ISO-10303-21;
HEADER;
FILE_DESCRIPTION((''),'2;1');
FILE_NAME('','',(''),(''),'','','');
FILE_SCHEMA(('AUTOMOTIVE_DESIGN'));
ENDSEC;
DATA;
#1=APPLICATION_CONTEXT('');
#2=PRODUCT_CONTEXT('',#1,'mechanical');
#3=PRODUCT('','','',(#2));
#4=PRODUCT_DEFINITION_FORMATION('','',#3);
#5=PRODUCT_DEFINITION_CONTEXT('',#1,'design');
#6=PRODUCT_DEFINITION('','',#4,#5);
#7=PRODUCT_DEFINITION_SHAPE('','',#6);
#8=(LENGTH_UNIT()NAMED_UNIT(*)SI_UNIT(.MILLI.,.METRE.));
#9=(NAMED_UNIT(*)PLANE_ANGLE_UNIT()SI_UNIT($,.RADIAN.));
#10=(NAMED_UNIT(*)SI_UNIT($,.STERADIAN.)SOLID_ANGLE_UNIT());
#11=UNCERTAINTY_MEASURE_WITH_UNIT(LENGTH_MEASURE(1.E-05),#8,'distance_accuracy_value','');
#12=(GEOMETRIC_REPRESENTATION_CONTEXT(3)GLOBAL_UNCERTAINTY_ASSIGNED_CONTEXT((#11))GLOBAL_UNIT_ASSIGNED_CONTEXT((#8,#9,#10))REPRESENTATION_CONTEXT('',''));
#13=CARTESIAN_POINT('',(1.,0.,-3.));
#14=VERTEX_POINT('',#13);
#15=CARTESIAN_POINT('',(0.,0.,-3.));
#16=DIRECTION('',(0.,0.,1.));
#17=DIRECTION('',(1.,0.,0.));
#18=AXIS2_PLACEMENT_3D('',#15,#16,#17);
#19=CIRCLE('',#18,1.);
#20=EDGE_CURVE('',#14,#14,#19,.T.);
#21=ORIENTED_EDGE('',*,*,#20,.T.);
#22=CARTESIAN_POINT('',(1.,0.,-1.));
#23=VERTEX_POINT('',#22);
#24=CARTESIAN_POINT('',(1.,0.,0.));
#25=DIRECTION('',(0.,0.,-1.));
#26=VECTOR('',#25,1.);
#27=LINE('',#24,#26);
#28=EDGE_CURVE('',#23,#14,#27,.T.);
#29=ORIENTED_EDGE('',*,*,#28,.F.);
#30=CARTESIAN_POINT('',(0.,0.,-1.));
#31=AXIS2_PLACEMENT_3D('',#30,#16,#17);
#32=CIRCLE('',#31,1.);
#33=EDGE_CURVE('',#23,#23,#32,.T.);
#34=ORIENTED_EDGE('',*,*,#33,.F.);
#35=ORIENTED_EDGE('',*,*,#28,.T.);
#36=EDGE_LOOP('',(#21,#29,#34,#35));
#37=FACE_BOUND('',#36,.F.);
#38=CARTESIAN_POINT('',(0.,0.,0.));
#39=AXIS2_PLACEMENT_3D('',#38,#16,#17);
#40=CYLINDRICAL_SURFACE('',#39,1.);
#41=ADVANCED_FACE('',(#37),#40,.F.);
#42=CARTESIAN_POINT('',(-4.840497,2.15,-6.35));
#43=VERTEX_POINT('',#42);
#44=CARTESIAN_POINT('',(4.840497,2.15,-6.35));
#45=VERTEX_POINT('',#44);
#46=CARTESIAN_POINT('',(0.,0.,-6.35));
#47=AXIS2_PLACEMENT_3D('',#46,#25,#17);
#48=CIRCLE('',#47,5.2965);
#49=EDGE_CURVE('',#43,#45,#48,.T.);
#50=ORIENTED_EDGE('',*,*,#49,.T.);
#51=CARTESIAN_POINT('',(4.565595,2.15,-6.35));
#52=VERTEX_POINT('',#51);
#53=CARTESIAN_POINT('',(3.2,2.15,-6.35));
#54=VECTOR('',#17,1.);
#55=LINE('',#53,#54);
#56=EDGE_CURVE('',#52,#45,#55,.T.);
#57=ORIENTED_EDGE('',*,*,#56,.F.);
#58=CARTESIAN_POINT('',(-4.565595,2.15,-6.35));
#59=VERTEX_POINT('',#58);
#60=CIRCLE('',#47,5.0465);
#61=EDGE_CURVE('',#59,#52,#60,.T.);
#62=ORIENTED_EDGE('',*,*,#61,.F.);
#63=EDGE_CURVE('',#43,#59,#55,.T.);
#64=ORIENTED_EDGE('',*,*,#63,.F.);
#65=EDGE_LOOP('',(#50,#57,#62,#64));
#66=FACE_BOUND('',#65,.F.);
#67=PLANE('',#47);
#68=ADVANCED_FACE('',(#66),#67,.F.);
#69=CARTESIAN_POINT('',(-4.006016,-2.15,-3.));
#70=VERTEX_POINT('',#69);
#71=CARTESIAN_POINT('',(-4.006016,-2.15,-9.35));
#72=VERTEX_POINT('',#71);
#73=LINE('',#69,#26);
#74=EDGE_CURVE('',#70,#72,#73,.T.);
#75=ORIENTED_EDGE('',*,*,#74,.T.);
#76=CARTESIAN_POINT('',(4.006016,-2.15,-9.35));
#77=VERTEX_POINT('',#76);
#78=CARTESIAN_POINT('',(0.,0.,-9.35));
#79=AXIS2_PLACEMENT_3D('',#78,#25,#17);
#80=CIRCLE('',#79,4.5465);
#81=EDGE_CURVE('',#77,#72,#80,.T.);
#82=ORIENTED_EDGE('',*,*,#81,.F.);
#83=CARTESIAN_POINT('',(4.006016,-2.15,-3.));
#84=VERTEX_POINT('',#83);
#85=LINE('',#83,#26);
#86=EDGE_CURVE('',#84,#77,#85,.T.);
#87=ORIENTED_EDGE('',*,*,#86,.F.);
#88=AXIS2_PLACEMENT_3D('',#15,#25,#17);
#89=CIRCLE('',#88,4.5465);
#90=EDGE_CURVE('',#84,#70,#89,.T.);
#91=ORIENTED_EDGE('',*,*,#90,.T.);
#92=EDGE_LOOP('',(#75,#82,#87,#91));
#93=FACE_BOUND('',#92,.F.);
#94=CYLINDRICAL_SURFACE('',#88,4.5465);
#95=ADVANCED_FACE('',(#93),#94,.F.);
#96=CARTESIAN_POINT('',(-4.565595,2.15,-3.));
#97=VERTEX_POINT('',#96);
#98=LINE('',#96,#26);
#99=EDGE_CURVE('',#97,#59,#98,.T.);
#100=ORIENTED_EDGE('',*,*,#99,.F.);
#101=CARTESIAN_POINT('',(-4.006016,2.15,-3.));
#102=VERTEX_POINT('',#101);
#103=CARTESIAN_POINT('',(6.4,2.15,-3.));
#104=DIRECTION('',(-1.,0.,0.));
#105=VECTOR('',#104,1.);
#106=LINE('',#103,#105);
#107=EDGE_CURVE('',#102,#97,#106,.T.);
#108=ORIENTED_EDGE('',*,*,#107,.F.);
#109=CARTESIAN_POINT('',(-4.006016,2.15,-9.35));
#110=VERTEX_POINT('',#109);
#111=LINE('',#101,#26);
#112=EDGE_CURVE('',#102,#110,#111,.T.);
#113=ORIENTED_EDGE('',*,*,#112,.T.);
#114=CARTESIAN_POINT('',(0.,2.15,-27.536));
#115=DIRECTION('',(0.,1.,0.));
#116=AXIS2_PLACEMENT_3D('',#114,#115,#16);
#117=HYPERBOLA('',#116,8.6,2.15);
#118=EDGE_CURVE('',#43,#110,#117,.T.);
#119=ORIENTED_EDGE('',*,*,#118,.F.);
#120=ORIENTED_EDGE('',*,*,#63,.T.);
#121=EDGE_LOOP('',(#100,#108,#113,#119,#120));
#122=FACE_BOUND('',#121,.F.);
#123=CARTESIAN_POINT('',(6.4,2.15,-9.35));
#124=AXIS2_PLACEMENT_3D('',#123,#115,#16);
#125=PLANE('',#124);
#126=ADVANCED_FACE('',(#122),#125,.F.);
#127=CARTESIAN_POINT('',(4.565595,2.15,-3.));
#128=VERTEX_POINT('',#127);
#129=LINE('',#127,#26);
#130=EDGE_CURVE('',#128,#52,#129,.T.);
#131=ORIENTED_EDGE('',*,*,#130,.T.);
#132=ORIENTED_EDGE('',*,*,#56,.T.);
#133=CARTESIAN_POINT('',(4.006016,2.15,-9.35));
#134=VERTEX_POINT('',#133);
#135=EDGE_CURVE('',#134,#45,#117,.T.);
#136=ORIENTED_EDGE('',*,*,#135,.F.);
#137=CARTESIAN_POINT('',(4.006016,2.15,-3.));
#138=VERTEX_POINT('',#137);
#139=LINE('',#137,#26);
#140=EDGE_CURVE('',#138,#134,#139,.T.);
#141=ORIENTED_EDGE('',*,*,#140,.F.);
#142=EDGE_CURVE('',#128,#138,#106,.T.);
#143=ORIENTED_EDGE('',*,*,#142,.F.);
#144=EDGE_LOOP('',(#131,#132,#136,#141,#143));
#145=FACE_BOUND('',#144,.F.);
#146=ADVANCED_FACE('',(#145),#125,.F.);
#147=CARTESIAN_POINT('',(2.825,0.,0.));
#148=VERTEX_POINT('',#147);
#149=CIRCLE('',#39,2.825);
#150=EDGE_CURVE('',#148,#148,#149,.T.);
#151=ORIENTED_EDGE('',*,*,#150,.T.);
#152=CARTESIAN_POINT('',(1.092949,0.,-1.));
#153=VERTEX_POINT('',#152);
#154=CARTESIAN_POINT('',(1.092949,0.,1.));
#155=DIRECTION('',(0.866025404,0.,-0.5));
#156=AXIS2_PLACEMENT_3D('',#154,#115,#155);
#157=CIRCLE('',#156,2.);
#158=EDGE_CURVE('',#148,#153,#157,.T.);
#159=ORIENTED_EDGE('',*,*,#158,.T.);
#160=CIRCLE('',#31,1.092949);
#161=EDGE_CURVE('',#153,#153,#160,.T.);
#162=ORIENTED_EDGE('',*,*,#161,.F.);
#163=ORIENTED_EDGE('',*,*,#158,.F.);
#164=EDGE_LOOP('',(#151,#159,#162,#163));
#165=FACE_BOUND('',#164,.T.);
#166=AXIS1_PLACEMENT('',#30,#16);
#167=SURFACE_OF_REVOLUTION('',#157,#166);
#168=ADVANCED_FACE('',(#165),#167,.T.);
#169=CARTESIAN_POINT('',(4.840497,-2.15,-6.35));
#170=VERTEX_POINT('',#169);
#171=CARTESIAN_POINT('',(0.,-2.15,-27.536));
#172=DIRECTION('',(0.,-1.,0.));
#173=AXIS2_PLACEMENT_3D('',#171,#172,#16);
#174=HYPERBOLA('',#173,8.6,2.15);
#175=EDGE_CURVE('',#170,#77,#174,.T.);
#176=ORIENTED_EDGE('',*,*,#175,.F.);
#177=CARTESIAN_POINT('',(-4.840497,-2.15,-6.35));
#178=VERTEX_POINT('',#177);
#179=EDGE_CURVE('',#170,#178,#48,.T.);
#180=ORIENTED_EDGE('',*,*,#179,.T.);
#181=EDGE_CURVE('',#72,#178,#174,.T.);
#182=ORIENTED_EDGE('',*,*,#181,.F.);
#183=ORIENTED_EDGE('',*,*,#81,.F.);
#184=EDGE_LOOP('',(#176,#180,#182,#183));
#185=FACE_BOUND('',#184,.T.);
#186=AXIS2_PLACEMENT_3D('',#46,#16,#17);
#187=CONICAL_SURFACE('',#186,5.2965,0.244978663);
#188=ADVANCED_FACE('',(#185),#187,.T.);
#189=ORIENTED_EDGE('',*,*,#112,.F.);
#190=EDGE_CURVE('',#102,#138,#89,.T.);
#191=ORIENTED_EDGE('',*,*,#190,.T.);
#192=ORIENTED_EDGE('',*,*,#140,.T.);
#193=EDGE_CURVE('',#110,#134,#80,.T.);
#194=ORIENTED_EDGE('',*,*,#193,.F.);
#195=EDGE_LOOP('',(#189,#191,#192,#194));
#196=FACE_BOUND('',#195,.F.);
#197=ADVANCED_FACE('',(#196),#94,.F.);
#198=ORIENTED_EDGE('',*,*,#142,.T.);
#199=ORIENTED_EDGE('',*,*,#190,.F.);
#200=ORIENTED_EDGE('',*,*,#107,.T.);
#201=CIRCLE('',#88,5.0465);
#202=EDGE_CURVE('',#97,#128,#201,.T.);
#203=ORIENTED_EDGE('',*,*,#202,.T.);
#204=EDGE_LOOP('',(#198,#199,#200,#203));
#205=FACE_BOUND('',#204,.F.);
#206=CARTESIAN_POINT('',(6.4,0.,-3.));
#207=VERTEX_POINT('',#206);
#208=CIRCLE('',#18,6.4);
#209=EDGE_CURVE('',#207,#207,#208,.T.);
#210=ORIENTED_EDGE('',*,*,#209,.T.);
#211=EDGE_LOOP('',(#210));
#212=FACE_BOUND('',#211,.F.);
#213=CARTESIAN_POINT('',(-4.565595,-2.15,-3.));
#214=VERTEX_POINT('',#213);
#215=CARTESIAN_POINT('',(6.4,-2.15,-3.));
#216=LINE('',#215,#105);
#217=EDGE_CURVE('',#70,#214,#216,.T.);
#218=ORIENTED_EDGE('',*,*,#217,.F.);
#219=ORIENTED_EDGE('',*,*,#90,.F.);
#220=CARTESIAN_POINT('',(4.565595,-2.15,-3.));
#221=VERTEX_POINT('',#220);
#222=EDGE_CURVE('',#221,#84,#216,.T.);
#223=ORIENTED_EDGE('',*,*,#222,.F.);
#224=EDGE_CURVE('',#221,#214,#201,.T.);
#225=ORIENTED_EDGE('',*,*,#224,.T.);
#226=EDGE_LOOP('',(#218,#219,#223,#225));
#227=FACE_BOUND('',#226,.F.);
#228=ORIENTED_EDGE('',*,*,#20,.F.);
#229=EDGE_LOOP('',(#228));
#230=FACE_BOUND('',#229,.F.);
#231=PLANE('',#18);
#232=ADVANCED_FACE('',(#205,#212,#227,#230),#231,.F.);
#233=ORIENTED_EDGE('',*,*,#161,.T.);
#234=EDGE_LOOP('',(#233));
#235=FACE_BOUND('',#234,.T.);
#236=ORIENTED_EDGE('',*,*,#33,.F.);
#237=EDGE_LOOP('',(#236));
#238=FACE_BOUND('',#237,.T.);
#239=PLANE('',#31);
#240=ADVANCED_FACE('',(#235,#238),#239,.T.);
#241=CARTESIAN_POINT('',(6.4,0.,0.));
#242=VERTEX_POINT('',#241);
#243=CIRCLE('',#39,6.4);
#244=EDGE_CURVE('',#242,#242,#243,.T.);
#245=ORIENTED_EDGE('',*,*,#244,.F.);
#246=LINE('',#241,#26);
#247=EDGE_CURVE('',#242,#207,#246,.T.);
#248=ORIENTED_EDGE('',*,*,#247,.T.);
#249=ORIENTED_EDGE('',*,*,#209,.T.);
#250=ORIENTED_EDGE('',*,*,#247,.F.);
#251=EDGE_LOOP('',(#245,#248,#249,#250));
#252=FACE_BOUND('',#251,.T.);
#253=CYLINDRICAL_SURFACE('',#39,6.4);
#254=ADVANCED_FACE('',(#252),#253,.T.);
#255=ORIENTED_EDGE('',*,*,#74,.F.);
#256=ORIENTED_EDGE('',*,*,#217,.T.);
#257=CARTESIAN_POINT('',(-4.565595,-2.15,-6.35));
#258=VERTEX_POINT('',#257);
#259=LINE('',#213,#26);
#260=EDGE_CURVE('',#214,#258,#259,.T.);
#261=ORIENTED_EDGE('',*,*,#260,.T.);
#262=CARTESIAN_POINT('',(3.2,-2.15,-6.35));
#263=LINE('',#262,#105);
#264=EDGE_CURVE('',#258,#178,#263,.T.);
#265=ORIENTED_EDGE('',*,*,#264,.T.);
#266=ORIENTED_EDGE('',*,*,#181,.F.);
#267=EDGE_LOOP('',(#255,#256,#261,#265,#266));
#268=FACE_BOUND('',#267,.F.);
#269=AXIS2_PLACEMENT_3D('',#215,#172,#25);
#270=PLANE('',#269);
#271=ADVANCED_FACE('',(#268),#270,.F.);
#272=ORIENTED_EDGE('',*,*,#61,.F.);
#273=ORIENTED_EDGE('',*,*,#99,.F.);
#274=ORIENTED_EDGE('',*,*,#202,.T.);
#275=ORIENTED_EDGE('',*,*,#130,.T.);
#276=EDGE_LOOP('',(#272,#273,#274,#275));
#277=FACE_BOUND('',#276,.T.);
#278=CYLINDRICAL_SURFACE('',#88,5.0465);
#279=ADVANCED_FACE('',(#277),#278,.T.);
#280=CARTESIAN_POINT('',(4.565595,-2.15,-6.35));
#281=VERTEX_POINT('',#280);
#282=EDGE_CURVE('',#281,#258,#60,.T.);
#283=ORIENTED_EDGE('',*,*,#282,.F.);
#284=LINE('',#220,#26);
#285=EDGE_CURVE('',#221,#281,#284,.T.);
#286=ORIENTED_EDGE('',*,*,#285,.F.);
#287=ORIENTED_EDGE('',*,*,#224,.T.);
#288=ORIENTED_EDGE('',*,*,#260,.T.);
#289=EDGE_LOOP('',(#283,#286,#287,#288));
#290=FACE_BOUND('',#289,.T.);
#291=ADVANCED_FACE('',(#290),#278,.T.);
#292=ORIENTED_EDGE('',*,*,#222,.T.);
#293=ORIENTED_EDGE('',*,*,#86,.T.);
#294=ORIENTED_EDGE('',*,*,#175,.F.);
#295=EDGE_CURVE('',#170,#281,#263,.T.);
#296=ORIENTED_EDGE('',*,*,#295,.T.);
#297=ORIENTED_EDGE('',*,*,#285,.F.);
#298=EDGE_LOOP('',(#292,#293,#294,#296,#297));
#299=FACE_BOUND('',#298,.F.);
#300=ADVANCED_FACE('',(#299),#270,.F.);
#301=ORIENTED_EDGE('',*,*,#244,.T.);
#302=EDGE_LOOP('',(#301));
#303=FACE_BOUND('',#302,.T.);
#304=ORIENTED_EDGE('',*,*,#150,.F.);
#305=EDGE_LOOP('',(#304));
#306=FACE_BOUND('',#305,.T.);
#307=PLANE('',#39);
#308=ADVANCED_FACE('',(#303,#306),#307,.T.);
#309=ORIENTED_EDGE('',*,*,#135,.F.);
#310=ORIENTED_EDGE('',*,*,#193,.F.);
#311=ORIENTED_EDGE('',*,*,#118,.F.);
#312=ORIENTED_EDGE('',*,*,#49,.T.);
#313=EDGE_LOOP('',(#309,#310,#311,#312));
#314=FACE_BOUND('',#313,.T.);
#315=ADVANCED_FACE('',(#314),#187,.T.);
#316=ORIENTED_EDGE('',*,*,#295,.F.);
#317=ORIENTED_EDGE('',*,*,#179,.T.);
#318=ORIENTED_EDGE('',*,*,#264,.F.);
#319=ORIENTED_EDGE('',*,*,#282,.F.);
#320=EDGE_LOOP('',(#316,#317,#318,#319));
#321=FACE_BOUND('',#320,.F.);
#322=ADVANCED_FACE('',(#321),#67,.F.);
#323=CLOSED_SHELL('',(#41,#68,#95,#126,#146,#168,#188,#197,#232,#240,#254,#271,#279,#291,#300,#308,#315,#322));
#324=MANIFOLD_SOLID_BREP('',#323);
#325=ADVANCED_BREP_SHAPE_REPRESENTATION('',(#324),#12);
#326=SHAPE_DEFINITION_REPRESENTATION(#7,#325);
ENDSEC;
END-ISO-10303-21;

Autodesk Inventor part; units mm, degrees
ref_plane "XZ Plane" through (0, 0, 0) normal (0, 1, 0) x (-1, 0, 0)
ref_plane "XY Plane" through (0, 0, 0) normal (0, 0, 1) x (1, 0, 0)
sketch "Sketch1" plane through (0, 0, 0) normal (0, 0, 1) x (1, 0, 0)
  circle A0 centre (0, 0) radius 6.4
  dimension "d0" = 12.8
sketch "Sketch2" plane through (0, 0, 0) normal (0, 0, 1) x (1, 0, 0)
  circle A0 centre (0, 0) radius 2.825
  dimension "d3" = 5.65
sketch "Sketch3" plane through (0, 0, 0) normal (0, 0, 1) x (1, 0, 0)
  circle A0 centre (0, 0) radius 1
  dimension "d4" = 2
extrude "Extrusion1" add sketch "Sketch1" against normal blind 3
extrude "Extrusion2" cut sketch "Sketch2" against normal blind 1
extrude "Extrusion3" cut sketch "Sketch3" against normal blind 3
fillet "Fillet1" radius 2 1 edges at (-2.825, 0, -1)
sketch "Sketch4" plane through (0, 0, 0) normal (0, 1, 0) x (-1, 0, 0)
  line L0 (-5.0465, -3) -> (-5.0465, -6.35)
  line L1 (-6.4, -3) -> (6.4, -3) projected
  line L2 (-5.2965, -6.35) -> (-4.5465, -9.35)
  line L3 (-5.2965, -6.35) -> (-5.0465, -6.35)
  line L4 (-4.5465, -3) -> (-4.5465, -9.35)
  line L5 (-5.0465, -3) -> (-4.5465, -3)
  line L6 (0, -3) -> (0, -11.7949)
  point P0 (0, 0)
  dimension "d21" = 0.25
  dimension "d26" = 6.35
  dimension "d28" = 0.5
  dimension "d29" = 90
revolve "Revolution2" add sketch "Sketch4" angle 360 about axis through (0, 0, -3) along (0, 0, -1)
ref_plane "Work Plane2" through (6.4, 0, 0) normal (1, 0, 0) x (0, 1, 0)
sketch "Sketch7" plane through (6.4, 0, 0) normal (1, 0, 0) x (0, 1, 0)
  line L0 (-2.15, -3) -> (-2.15, -9.35)
  line L1 (-2.15, -9.35) -> (2.15, -9.35)
  line L2 (2.15, -9.35) -> (2.15, -3)
  line L3 (2.15, -3) -> (-2.15, -3)
  point P0 (0, 0)
  dimension "d34" = 4.3
  dimension "d35" = 6.35
extrude "Extrusion4" cut sketch "Sketch7" against normal blind 12.8
properties part number "Cable end barrel stop"
